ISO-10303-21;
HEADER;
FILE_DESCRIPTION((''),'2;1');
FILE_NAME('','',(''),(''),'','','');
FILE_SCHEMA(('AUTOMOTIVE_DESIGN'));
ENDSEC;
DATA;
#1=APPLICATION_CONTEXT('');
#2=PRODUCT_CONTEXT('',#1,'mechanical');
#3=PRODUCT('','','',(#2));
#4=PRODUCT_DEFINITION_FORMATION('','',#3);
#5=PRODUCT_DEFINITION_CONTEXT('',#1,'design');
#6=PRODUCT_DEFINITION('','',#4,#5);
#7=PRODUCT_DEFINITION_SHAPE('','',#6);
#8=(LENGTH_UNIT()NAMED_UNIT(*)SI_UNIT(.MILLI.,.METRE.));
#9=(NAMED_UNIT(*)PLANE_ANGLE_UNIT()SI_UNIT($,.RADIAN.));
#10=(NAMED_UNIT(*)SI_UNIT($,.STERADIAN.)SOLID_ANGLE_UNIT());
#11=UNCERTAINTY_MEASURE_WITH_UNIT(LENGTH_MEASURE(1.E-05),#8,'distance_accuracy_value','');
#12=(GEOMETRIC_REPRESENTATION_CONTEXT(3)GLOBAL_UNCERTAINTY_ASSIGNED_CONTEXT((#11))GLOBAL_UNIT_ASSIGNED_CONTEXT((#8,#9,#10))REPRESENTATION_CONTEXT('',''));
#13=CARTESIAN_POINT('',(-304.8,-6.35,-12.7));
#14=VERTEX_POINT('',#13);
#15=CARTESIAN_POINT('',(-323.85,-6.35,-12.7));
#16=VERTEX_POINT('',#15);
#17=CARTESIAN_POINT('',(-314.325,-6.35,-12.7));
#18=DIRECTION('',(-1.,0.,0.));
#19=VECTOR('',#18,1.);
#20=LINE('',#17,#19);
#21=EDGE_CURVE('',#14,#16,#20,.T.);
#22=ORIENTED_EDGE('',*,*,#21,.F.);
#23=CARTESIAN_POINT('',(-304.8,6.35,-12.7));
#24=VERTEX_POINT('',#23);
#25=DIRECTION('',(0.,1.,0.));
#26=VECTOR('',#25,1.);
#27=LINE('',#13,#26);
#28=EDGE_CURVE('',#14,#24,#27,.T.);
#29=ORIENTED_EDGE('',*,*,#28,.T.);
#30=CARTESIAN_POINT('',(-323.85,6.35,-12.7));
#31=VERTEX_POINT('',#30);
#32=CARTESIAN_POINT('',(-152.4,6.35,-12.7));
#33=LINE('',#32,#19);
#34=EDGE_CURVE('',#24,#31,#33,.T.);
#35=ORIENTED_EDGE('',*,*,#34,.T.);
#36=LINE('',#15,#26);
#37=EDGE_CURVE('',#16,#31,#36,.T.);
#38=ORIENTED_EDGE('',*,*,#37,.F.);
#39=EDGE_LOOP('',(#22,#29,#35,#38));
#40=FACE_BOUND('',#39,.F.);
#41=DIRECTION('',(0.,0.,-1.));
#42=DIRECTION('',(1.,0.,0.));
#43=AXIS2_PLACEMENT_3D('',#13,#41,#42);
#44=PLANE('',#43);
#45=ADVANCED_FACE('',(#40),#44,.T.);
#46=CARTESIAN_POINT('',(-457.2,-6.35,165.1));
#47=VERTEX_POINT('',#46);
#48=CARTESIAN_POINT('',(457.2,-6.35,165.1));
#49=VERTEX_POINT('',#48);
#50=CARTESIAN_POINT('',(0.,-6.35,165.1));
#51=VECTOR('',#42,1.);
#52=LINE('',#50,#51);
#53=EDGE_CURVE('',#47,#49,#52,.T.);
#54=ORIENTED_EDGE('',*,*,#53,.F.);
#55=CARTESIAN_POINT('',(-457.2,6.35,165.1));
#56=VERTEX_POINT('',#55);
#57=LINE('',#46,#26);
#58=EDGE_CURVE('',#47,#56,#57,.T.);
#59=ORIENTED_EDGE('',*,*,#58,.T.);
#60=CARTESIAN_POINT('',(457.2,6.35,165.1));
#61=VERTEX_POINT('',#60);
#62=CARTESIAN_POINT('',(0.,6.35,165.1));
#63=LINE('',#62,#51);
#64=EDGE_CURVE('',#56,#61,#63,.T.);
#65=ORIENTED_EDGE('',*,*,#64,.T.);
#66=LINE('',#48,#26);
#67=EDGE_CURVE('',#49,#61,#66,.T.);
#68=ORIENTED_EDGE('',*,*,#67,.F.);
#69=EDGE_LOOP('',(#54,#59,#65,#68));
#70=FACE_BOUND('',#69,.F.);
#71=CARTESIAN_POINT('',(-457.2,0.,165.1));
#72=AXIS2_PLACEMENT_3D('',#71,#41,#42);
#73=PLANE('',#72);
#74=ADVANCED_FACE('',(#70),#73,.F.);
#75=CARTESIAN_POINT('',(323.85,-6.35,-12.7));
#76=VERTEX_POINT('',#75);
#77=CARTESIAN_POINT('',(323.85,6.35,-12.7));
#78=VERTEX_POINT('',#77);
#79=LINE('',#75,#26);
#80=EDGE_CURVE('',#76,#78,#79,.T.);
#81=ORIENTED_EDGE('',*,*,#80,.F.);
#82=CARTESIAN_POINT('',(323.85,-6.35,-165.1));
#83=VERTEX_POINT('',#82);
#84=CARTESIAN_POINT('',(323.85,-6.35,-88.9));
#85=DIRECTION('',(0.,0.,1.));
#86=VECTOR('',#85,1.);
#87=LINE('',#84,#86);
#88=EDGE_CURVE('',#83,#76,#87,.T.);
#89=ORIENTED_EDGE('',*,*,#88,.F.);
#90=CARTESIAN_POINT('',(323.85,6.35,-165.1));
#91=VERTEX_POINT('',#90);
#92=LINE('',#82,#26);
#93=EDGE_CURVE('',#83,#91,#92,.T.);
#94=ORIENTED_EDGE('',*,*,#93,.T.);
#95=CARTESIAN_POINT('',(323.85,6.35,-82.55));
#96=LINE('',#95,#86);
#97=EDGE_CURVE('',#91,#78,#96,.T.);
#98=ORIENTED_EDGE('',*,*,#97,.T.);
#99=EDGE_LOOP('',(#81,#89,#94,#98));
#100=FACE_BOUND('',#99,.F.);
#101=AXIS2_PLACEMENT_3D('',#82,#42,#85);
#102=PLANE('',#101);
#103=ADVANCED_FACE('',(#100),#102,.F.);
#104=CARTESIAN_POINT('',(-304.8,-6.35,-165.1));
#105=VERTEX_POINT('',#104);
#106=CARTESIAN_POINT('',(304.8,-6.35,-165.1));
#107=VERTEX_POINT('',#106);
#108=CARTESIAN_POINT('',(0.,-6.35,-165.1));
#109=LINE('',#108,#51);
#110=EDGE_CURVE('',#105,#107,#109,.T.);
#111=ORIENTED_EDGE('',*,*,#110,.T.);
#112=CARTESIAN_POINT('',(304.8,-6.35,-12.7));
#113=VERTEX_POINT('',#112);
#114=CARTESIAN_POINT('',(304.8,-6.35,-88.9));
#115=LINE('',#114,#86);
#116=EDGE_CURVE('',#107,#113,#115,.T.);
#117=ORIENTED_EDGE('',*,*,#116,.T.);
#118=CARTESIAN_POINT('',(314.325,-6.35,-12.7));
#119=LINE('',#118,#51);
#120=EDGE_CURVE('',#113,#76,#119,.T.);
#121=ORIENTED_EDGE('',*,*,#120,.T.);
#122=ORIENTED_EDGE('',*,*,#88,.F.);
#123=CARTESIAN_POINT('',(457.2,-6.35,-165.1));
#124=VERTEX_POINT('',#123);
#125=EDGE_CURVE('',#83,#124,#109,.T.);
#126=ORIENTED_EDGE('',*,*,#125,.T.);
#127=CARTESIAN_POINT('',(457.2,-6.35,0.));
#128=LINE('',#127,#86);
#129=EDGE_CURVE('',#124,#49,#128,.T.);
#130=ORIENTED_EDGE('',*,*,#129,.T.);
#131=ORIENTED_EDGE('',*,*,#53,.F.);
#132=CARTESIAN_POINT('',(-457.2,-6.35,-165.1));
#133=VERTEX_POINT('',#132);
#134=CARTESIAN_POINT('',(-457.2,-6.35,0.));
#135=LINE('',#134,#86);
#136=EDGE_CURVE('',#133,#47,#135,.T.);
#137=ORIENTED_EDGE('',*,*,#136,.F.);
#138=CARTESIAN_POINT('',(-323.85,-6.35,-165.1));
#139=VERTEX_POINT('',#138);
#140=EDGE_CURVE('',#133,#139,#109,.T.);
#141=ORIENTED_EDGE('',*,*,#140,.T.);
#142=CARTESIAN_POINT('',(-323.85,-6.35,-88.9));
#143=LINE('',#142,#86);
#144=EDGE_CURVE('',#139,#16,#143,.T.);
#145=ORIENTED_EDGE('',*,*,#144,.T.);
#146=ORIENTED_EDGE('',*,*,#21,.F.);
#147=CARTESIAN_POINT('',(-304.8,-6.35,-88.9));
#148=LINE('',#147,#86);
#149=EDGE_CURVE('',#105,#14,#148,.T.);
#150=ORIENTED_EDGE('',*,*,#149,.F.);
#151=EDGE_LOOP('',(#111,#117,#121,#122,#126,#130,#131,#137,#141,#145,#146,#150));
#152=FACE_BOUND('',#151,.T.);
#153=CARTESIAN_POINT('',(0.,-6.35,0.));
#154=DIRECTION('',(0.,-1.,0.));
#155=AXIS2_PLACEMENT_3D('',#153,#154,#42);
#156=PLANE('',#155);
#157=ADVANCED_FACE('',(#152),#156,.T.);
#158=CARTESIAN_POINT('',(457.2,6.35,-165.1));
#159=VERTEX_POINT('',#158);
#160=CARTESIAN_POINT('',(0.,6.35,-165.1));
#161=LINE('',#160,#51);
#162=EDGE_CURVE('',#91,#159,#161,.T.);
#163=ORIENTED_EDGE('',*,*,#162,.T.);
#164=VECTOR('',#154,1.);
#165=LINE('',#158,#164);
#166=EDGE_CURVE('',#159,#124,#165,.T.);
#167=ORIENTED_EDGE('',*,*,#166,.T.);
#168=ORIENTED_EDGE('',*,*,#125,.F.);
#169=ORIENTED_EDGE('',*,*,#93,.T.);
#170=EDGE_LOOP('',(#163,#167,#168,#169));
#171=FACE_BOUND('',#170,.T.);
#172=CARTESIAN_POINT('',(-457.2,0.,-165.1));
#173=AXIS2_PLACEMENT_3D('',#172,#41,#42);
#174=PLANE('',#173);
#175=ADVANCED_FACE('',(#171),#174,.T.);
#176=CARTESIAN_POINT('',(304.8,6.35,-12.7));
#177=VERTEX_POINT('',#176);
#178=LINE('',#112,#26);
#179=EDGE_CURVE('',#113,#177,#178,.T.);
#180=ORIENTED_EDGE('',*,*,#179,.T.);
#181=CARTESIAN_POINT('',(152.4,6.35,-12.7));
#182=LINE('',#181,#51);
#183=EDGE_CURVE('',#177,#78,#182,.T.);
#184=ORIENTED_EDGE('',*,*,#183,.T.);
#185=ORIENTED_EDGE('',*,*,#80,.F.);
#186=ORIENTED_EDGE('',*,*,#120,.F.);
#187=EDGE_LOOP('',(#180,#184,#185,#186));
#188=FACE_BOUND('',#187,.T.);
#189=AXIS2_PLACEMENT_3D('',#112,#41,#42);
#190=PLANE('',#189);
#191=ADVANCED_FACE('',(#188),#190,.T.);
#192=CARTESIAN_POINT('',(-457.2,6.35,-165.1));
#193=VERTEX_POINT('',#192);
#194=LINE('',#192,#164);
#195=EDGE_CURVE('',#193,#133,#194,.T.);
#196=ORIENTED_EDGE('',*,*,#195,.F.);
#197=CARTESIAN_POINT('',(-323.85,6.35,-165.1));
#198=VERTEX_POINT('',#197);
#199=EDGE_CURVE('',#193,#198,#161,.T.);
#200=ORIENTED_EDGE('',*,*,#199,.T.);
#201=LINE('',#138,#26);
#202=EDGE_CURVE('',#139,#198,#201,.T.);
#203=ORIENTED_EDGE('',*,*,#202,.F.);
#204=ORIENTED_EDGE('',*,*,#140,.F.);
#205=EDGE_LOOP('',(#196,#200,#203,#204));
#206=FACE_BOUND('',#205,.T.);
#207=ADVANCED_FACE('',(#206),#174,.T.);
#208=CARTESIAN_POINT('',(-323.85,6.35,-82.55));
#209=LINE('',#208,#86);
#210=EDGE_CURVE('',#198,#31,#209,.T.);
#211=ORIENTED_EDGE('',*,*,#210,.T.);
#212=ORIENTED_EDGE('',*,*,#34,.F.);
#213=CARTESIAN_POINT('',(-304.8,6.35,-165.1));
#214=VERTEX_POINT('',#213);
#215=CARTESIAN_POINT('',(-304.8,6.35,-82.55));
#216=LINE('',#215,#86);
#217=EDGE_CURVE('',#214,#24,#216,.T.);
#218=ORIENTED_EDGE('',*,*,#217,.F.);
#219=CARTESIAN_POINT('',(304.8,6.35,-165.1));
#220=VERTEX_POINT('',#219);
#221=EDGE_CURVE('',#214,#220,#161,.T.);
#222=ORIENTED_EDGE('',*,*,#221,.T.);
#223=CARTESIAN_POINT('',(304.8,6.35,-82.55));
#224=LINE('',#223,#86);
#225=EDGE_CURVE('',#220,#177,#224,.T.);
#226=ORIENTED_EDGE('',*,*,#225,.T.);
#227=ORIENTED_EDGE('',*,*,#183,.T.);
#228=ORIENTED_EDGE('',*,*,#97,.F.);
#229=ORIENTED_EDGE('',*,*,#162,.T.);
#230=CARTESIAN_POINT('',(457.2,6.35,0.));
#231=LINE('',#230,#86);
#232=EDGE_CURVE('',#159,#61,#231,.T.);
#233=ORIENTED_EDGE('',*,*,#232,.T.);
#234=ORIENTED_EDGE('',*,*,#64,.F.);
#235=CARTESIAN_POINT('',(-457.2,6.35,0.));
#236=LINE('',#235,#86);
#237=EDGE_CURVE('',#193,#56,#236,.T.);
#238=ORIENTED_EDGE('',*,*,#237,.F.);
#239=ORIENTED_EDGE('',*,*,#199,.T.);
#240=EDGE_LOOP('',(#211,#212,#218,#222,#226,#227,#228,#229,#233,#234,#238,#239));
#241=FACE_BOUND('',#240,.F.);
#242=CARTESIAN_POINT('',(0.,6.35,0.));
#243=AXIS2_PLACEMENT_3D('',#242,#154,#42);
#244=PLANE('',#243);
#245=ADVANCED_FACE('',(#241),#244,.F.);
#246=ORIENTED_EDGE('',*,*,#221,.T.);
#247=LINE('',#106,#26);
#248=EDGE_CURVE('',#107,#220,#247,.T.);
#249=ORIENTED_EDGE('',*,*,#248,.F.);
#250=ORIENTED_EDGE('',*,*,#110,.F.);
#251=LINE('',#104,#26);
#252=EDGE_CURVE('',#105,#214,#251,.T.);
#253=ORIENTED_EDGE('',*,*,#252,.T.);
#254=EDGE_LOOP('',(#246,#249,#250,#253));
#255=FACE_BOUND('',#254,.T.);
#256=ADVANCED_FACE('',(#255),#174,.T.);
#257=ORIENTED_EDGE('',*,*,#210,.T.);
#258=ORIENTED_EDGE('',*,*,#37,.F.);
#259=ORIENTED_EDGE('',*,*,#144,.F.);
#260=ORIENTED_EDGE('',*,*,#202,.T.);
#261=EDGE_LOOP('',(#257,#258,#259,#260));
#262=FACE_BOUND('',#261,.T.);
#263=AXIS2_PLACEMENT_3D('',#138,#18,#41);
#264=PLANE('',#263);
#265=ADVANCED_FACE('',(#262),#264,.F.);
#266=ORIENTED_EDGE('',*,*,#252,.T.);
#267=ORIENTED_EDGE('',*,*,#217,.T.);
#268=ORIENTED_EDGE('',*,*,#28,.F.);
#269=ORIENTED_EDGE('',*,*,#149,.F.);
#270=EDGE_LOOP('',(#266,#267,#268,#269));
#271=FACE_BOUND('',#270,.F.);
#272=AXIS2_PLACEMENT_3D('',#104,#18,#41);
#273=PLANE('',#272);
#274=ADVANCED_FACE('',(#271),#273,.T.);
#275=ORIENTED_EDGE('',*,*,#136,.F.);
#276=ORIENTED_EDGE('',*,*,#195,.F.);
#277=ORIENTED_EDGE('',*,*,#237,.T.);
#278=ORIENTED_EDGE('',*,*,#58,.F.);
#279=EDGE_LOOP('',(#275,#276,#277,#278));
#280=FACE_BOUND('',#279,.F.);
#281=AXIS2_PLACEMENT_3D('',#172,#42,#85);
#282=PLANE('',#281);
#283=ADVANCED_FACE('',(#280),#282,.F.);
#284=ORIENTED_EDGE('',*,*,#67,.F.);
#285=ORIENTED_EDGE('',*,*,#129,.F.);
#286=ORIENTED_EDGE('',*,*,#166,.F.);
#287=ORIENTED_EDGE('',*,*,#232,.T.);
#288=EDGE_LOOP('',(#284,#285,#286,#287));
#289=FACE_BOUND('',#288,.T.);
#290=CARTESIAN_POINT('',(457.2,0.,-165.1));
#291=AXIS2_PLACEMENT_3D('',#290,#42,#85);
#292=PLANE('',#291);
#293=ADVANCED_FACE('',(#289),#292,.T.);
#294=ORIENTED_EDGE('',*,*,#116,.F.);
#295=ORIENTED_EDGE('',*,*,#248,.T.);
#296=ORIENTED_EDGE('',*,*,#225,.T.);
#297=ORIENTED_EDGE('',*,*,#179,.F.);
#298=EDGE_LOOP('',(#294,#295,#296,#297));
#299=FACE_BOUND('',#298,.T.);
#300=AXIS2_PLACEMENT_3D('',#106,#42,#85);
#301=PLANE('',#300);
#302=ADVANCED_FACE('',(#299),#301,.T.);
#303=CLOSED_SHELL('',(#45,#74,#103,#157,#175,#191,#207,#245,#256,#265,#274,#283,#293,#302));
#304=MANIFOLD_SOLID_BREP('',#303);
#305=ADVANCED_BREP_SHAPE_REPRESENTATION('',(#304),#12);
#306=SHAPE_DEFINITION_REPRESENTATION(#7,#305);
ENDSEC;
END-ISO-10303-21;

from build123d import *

# Parameters (mm, degrees)
F0_W     = 914.4
F0_H     = 330.2
F1_DEPTH = 6.35
F2_W     = 19.05
F2_H     = 152.4
F3_DEPTH = 12.701


# Not quite as in the source:
# - a pattern or mirror of a feature is missing from the dataset's text; its kind, count and spacing are read off the source's solid


with BuildPart() as f1:
    # F0 (on Front) → F1 (new body, symmetric)
    with BuildSketch(Plane.XZ):
        Rectangle(F0_W, F0_H)
    extrude(amount=F1_DEPTH, both=True)

    # F2 (on face) → F3 (cut, through all)
    with BuildSketch(Plane.XZ.offset(6.35)):
        with Locations((314.325, -88.9)):
            Rectangle(F2_W, F2_H)
    f3 = extrude(amount=-F3_DEPTH, mode=Mode.SUBTRACT)

    # F3_copies: F3 across plane
    add(f3.mirror(Plane(origin=(0, 0, 0), x_dir=(0, 0, -1), z_dir=(-1, 0, 0))), mode=Mode.SUBTRACT)


solid = f1.part
